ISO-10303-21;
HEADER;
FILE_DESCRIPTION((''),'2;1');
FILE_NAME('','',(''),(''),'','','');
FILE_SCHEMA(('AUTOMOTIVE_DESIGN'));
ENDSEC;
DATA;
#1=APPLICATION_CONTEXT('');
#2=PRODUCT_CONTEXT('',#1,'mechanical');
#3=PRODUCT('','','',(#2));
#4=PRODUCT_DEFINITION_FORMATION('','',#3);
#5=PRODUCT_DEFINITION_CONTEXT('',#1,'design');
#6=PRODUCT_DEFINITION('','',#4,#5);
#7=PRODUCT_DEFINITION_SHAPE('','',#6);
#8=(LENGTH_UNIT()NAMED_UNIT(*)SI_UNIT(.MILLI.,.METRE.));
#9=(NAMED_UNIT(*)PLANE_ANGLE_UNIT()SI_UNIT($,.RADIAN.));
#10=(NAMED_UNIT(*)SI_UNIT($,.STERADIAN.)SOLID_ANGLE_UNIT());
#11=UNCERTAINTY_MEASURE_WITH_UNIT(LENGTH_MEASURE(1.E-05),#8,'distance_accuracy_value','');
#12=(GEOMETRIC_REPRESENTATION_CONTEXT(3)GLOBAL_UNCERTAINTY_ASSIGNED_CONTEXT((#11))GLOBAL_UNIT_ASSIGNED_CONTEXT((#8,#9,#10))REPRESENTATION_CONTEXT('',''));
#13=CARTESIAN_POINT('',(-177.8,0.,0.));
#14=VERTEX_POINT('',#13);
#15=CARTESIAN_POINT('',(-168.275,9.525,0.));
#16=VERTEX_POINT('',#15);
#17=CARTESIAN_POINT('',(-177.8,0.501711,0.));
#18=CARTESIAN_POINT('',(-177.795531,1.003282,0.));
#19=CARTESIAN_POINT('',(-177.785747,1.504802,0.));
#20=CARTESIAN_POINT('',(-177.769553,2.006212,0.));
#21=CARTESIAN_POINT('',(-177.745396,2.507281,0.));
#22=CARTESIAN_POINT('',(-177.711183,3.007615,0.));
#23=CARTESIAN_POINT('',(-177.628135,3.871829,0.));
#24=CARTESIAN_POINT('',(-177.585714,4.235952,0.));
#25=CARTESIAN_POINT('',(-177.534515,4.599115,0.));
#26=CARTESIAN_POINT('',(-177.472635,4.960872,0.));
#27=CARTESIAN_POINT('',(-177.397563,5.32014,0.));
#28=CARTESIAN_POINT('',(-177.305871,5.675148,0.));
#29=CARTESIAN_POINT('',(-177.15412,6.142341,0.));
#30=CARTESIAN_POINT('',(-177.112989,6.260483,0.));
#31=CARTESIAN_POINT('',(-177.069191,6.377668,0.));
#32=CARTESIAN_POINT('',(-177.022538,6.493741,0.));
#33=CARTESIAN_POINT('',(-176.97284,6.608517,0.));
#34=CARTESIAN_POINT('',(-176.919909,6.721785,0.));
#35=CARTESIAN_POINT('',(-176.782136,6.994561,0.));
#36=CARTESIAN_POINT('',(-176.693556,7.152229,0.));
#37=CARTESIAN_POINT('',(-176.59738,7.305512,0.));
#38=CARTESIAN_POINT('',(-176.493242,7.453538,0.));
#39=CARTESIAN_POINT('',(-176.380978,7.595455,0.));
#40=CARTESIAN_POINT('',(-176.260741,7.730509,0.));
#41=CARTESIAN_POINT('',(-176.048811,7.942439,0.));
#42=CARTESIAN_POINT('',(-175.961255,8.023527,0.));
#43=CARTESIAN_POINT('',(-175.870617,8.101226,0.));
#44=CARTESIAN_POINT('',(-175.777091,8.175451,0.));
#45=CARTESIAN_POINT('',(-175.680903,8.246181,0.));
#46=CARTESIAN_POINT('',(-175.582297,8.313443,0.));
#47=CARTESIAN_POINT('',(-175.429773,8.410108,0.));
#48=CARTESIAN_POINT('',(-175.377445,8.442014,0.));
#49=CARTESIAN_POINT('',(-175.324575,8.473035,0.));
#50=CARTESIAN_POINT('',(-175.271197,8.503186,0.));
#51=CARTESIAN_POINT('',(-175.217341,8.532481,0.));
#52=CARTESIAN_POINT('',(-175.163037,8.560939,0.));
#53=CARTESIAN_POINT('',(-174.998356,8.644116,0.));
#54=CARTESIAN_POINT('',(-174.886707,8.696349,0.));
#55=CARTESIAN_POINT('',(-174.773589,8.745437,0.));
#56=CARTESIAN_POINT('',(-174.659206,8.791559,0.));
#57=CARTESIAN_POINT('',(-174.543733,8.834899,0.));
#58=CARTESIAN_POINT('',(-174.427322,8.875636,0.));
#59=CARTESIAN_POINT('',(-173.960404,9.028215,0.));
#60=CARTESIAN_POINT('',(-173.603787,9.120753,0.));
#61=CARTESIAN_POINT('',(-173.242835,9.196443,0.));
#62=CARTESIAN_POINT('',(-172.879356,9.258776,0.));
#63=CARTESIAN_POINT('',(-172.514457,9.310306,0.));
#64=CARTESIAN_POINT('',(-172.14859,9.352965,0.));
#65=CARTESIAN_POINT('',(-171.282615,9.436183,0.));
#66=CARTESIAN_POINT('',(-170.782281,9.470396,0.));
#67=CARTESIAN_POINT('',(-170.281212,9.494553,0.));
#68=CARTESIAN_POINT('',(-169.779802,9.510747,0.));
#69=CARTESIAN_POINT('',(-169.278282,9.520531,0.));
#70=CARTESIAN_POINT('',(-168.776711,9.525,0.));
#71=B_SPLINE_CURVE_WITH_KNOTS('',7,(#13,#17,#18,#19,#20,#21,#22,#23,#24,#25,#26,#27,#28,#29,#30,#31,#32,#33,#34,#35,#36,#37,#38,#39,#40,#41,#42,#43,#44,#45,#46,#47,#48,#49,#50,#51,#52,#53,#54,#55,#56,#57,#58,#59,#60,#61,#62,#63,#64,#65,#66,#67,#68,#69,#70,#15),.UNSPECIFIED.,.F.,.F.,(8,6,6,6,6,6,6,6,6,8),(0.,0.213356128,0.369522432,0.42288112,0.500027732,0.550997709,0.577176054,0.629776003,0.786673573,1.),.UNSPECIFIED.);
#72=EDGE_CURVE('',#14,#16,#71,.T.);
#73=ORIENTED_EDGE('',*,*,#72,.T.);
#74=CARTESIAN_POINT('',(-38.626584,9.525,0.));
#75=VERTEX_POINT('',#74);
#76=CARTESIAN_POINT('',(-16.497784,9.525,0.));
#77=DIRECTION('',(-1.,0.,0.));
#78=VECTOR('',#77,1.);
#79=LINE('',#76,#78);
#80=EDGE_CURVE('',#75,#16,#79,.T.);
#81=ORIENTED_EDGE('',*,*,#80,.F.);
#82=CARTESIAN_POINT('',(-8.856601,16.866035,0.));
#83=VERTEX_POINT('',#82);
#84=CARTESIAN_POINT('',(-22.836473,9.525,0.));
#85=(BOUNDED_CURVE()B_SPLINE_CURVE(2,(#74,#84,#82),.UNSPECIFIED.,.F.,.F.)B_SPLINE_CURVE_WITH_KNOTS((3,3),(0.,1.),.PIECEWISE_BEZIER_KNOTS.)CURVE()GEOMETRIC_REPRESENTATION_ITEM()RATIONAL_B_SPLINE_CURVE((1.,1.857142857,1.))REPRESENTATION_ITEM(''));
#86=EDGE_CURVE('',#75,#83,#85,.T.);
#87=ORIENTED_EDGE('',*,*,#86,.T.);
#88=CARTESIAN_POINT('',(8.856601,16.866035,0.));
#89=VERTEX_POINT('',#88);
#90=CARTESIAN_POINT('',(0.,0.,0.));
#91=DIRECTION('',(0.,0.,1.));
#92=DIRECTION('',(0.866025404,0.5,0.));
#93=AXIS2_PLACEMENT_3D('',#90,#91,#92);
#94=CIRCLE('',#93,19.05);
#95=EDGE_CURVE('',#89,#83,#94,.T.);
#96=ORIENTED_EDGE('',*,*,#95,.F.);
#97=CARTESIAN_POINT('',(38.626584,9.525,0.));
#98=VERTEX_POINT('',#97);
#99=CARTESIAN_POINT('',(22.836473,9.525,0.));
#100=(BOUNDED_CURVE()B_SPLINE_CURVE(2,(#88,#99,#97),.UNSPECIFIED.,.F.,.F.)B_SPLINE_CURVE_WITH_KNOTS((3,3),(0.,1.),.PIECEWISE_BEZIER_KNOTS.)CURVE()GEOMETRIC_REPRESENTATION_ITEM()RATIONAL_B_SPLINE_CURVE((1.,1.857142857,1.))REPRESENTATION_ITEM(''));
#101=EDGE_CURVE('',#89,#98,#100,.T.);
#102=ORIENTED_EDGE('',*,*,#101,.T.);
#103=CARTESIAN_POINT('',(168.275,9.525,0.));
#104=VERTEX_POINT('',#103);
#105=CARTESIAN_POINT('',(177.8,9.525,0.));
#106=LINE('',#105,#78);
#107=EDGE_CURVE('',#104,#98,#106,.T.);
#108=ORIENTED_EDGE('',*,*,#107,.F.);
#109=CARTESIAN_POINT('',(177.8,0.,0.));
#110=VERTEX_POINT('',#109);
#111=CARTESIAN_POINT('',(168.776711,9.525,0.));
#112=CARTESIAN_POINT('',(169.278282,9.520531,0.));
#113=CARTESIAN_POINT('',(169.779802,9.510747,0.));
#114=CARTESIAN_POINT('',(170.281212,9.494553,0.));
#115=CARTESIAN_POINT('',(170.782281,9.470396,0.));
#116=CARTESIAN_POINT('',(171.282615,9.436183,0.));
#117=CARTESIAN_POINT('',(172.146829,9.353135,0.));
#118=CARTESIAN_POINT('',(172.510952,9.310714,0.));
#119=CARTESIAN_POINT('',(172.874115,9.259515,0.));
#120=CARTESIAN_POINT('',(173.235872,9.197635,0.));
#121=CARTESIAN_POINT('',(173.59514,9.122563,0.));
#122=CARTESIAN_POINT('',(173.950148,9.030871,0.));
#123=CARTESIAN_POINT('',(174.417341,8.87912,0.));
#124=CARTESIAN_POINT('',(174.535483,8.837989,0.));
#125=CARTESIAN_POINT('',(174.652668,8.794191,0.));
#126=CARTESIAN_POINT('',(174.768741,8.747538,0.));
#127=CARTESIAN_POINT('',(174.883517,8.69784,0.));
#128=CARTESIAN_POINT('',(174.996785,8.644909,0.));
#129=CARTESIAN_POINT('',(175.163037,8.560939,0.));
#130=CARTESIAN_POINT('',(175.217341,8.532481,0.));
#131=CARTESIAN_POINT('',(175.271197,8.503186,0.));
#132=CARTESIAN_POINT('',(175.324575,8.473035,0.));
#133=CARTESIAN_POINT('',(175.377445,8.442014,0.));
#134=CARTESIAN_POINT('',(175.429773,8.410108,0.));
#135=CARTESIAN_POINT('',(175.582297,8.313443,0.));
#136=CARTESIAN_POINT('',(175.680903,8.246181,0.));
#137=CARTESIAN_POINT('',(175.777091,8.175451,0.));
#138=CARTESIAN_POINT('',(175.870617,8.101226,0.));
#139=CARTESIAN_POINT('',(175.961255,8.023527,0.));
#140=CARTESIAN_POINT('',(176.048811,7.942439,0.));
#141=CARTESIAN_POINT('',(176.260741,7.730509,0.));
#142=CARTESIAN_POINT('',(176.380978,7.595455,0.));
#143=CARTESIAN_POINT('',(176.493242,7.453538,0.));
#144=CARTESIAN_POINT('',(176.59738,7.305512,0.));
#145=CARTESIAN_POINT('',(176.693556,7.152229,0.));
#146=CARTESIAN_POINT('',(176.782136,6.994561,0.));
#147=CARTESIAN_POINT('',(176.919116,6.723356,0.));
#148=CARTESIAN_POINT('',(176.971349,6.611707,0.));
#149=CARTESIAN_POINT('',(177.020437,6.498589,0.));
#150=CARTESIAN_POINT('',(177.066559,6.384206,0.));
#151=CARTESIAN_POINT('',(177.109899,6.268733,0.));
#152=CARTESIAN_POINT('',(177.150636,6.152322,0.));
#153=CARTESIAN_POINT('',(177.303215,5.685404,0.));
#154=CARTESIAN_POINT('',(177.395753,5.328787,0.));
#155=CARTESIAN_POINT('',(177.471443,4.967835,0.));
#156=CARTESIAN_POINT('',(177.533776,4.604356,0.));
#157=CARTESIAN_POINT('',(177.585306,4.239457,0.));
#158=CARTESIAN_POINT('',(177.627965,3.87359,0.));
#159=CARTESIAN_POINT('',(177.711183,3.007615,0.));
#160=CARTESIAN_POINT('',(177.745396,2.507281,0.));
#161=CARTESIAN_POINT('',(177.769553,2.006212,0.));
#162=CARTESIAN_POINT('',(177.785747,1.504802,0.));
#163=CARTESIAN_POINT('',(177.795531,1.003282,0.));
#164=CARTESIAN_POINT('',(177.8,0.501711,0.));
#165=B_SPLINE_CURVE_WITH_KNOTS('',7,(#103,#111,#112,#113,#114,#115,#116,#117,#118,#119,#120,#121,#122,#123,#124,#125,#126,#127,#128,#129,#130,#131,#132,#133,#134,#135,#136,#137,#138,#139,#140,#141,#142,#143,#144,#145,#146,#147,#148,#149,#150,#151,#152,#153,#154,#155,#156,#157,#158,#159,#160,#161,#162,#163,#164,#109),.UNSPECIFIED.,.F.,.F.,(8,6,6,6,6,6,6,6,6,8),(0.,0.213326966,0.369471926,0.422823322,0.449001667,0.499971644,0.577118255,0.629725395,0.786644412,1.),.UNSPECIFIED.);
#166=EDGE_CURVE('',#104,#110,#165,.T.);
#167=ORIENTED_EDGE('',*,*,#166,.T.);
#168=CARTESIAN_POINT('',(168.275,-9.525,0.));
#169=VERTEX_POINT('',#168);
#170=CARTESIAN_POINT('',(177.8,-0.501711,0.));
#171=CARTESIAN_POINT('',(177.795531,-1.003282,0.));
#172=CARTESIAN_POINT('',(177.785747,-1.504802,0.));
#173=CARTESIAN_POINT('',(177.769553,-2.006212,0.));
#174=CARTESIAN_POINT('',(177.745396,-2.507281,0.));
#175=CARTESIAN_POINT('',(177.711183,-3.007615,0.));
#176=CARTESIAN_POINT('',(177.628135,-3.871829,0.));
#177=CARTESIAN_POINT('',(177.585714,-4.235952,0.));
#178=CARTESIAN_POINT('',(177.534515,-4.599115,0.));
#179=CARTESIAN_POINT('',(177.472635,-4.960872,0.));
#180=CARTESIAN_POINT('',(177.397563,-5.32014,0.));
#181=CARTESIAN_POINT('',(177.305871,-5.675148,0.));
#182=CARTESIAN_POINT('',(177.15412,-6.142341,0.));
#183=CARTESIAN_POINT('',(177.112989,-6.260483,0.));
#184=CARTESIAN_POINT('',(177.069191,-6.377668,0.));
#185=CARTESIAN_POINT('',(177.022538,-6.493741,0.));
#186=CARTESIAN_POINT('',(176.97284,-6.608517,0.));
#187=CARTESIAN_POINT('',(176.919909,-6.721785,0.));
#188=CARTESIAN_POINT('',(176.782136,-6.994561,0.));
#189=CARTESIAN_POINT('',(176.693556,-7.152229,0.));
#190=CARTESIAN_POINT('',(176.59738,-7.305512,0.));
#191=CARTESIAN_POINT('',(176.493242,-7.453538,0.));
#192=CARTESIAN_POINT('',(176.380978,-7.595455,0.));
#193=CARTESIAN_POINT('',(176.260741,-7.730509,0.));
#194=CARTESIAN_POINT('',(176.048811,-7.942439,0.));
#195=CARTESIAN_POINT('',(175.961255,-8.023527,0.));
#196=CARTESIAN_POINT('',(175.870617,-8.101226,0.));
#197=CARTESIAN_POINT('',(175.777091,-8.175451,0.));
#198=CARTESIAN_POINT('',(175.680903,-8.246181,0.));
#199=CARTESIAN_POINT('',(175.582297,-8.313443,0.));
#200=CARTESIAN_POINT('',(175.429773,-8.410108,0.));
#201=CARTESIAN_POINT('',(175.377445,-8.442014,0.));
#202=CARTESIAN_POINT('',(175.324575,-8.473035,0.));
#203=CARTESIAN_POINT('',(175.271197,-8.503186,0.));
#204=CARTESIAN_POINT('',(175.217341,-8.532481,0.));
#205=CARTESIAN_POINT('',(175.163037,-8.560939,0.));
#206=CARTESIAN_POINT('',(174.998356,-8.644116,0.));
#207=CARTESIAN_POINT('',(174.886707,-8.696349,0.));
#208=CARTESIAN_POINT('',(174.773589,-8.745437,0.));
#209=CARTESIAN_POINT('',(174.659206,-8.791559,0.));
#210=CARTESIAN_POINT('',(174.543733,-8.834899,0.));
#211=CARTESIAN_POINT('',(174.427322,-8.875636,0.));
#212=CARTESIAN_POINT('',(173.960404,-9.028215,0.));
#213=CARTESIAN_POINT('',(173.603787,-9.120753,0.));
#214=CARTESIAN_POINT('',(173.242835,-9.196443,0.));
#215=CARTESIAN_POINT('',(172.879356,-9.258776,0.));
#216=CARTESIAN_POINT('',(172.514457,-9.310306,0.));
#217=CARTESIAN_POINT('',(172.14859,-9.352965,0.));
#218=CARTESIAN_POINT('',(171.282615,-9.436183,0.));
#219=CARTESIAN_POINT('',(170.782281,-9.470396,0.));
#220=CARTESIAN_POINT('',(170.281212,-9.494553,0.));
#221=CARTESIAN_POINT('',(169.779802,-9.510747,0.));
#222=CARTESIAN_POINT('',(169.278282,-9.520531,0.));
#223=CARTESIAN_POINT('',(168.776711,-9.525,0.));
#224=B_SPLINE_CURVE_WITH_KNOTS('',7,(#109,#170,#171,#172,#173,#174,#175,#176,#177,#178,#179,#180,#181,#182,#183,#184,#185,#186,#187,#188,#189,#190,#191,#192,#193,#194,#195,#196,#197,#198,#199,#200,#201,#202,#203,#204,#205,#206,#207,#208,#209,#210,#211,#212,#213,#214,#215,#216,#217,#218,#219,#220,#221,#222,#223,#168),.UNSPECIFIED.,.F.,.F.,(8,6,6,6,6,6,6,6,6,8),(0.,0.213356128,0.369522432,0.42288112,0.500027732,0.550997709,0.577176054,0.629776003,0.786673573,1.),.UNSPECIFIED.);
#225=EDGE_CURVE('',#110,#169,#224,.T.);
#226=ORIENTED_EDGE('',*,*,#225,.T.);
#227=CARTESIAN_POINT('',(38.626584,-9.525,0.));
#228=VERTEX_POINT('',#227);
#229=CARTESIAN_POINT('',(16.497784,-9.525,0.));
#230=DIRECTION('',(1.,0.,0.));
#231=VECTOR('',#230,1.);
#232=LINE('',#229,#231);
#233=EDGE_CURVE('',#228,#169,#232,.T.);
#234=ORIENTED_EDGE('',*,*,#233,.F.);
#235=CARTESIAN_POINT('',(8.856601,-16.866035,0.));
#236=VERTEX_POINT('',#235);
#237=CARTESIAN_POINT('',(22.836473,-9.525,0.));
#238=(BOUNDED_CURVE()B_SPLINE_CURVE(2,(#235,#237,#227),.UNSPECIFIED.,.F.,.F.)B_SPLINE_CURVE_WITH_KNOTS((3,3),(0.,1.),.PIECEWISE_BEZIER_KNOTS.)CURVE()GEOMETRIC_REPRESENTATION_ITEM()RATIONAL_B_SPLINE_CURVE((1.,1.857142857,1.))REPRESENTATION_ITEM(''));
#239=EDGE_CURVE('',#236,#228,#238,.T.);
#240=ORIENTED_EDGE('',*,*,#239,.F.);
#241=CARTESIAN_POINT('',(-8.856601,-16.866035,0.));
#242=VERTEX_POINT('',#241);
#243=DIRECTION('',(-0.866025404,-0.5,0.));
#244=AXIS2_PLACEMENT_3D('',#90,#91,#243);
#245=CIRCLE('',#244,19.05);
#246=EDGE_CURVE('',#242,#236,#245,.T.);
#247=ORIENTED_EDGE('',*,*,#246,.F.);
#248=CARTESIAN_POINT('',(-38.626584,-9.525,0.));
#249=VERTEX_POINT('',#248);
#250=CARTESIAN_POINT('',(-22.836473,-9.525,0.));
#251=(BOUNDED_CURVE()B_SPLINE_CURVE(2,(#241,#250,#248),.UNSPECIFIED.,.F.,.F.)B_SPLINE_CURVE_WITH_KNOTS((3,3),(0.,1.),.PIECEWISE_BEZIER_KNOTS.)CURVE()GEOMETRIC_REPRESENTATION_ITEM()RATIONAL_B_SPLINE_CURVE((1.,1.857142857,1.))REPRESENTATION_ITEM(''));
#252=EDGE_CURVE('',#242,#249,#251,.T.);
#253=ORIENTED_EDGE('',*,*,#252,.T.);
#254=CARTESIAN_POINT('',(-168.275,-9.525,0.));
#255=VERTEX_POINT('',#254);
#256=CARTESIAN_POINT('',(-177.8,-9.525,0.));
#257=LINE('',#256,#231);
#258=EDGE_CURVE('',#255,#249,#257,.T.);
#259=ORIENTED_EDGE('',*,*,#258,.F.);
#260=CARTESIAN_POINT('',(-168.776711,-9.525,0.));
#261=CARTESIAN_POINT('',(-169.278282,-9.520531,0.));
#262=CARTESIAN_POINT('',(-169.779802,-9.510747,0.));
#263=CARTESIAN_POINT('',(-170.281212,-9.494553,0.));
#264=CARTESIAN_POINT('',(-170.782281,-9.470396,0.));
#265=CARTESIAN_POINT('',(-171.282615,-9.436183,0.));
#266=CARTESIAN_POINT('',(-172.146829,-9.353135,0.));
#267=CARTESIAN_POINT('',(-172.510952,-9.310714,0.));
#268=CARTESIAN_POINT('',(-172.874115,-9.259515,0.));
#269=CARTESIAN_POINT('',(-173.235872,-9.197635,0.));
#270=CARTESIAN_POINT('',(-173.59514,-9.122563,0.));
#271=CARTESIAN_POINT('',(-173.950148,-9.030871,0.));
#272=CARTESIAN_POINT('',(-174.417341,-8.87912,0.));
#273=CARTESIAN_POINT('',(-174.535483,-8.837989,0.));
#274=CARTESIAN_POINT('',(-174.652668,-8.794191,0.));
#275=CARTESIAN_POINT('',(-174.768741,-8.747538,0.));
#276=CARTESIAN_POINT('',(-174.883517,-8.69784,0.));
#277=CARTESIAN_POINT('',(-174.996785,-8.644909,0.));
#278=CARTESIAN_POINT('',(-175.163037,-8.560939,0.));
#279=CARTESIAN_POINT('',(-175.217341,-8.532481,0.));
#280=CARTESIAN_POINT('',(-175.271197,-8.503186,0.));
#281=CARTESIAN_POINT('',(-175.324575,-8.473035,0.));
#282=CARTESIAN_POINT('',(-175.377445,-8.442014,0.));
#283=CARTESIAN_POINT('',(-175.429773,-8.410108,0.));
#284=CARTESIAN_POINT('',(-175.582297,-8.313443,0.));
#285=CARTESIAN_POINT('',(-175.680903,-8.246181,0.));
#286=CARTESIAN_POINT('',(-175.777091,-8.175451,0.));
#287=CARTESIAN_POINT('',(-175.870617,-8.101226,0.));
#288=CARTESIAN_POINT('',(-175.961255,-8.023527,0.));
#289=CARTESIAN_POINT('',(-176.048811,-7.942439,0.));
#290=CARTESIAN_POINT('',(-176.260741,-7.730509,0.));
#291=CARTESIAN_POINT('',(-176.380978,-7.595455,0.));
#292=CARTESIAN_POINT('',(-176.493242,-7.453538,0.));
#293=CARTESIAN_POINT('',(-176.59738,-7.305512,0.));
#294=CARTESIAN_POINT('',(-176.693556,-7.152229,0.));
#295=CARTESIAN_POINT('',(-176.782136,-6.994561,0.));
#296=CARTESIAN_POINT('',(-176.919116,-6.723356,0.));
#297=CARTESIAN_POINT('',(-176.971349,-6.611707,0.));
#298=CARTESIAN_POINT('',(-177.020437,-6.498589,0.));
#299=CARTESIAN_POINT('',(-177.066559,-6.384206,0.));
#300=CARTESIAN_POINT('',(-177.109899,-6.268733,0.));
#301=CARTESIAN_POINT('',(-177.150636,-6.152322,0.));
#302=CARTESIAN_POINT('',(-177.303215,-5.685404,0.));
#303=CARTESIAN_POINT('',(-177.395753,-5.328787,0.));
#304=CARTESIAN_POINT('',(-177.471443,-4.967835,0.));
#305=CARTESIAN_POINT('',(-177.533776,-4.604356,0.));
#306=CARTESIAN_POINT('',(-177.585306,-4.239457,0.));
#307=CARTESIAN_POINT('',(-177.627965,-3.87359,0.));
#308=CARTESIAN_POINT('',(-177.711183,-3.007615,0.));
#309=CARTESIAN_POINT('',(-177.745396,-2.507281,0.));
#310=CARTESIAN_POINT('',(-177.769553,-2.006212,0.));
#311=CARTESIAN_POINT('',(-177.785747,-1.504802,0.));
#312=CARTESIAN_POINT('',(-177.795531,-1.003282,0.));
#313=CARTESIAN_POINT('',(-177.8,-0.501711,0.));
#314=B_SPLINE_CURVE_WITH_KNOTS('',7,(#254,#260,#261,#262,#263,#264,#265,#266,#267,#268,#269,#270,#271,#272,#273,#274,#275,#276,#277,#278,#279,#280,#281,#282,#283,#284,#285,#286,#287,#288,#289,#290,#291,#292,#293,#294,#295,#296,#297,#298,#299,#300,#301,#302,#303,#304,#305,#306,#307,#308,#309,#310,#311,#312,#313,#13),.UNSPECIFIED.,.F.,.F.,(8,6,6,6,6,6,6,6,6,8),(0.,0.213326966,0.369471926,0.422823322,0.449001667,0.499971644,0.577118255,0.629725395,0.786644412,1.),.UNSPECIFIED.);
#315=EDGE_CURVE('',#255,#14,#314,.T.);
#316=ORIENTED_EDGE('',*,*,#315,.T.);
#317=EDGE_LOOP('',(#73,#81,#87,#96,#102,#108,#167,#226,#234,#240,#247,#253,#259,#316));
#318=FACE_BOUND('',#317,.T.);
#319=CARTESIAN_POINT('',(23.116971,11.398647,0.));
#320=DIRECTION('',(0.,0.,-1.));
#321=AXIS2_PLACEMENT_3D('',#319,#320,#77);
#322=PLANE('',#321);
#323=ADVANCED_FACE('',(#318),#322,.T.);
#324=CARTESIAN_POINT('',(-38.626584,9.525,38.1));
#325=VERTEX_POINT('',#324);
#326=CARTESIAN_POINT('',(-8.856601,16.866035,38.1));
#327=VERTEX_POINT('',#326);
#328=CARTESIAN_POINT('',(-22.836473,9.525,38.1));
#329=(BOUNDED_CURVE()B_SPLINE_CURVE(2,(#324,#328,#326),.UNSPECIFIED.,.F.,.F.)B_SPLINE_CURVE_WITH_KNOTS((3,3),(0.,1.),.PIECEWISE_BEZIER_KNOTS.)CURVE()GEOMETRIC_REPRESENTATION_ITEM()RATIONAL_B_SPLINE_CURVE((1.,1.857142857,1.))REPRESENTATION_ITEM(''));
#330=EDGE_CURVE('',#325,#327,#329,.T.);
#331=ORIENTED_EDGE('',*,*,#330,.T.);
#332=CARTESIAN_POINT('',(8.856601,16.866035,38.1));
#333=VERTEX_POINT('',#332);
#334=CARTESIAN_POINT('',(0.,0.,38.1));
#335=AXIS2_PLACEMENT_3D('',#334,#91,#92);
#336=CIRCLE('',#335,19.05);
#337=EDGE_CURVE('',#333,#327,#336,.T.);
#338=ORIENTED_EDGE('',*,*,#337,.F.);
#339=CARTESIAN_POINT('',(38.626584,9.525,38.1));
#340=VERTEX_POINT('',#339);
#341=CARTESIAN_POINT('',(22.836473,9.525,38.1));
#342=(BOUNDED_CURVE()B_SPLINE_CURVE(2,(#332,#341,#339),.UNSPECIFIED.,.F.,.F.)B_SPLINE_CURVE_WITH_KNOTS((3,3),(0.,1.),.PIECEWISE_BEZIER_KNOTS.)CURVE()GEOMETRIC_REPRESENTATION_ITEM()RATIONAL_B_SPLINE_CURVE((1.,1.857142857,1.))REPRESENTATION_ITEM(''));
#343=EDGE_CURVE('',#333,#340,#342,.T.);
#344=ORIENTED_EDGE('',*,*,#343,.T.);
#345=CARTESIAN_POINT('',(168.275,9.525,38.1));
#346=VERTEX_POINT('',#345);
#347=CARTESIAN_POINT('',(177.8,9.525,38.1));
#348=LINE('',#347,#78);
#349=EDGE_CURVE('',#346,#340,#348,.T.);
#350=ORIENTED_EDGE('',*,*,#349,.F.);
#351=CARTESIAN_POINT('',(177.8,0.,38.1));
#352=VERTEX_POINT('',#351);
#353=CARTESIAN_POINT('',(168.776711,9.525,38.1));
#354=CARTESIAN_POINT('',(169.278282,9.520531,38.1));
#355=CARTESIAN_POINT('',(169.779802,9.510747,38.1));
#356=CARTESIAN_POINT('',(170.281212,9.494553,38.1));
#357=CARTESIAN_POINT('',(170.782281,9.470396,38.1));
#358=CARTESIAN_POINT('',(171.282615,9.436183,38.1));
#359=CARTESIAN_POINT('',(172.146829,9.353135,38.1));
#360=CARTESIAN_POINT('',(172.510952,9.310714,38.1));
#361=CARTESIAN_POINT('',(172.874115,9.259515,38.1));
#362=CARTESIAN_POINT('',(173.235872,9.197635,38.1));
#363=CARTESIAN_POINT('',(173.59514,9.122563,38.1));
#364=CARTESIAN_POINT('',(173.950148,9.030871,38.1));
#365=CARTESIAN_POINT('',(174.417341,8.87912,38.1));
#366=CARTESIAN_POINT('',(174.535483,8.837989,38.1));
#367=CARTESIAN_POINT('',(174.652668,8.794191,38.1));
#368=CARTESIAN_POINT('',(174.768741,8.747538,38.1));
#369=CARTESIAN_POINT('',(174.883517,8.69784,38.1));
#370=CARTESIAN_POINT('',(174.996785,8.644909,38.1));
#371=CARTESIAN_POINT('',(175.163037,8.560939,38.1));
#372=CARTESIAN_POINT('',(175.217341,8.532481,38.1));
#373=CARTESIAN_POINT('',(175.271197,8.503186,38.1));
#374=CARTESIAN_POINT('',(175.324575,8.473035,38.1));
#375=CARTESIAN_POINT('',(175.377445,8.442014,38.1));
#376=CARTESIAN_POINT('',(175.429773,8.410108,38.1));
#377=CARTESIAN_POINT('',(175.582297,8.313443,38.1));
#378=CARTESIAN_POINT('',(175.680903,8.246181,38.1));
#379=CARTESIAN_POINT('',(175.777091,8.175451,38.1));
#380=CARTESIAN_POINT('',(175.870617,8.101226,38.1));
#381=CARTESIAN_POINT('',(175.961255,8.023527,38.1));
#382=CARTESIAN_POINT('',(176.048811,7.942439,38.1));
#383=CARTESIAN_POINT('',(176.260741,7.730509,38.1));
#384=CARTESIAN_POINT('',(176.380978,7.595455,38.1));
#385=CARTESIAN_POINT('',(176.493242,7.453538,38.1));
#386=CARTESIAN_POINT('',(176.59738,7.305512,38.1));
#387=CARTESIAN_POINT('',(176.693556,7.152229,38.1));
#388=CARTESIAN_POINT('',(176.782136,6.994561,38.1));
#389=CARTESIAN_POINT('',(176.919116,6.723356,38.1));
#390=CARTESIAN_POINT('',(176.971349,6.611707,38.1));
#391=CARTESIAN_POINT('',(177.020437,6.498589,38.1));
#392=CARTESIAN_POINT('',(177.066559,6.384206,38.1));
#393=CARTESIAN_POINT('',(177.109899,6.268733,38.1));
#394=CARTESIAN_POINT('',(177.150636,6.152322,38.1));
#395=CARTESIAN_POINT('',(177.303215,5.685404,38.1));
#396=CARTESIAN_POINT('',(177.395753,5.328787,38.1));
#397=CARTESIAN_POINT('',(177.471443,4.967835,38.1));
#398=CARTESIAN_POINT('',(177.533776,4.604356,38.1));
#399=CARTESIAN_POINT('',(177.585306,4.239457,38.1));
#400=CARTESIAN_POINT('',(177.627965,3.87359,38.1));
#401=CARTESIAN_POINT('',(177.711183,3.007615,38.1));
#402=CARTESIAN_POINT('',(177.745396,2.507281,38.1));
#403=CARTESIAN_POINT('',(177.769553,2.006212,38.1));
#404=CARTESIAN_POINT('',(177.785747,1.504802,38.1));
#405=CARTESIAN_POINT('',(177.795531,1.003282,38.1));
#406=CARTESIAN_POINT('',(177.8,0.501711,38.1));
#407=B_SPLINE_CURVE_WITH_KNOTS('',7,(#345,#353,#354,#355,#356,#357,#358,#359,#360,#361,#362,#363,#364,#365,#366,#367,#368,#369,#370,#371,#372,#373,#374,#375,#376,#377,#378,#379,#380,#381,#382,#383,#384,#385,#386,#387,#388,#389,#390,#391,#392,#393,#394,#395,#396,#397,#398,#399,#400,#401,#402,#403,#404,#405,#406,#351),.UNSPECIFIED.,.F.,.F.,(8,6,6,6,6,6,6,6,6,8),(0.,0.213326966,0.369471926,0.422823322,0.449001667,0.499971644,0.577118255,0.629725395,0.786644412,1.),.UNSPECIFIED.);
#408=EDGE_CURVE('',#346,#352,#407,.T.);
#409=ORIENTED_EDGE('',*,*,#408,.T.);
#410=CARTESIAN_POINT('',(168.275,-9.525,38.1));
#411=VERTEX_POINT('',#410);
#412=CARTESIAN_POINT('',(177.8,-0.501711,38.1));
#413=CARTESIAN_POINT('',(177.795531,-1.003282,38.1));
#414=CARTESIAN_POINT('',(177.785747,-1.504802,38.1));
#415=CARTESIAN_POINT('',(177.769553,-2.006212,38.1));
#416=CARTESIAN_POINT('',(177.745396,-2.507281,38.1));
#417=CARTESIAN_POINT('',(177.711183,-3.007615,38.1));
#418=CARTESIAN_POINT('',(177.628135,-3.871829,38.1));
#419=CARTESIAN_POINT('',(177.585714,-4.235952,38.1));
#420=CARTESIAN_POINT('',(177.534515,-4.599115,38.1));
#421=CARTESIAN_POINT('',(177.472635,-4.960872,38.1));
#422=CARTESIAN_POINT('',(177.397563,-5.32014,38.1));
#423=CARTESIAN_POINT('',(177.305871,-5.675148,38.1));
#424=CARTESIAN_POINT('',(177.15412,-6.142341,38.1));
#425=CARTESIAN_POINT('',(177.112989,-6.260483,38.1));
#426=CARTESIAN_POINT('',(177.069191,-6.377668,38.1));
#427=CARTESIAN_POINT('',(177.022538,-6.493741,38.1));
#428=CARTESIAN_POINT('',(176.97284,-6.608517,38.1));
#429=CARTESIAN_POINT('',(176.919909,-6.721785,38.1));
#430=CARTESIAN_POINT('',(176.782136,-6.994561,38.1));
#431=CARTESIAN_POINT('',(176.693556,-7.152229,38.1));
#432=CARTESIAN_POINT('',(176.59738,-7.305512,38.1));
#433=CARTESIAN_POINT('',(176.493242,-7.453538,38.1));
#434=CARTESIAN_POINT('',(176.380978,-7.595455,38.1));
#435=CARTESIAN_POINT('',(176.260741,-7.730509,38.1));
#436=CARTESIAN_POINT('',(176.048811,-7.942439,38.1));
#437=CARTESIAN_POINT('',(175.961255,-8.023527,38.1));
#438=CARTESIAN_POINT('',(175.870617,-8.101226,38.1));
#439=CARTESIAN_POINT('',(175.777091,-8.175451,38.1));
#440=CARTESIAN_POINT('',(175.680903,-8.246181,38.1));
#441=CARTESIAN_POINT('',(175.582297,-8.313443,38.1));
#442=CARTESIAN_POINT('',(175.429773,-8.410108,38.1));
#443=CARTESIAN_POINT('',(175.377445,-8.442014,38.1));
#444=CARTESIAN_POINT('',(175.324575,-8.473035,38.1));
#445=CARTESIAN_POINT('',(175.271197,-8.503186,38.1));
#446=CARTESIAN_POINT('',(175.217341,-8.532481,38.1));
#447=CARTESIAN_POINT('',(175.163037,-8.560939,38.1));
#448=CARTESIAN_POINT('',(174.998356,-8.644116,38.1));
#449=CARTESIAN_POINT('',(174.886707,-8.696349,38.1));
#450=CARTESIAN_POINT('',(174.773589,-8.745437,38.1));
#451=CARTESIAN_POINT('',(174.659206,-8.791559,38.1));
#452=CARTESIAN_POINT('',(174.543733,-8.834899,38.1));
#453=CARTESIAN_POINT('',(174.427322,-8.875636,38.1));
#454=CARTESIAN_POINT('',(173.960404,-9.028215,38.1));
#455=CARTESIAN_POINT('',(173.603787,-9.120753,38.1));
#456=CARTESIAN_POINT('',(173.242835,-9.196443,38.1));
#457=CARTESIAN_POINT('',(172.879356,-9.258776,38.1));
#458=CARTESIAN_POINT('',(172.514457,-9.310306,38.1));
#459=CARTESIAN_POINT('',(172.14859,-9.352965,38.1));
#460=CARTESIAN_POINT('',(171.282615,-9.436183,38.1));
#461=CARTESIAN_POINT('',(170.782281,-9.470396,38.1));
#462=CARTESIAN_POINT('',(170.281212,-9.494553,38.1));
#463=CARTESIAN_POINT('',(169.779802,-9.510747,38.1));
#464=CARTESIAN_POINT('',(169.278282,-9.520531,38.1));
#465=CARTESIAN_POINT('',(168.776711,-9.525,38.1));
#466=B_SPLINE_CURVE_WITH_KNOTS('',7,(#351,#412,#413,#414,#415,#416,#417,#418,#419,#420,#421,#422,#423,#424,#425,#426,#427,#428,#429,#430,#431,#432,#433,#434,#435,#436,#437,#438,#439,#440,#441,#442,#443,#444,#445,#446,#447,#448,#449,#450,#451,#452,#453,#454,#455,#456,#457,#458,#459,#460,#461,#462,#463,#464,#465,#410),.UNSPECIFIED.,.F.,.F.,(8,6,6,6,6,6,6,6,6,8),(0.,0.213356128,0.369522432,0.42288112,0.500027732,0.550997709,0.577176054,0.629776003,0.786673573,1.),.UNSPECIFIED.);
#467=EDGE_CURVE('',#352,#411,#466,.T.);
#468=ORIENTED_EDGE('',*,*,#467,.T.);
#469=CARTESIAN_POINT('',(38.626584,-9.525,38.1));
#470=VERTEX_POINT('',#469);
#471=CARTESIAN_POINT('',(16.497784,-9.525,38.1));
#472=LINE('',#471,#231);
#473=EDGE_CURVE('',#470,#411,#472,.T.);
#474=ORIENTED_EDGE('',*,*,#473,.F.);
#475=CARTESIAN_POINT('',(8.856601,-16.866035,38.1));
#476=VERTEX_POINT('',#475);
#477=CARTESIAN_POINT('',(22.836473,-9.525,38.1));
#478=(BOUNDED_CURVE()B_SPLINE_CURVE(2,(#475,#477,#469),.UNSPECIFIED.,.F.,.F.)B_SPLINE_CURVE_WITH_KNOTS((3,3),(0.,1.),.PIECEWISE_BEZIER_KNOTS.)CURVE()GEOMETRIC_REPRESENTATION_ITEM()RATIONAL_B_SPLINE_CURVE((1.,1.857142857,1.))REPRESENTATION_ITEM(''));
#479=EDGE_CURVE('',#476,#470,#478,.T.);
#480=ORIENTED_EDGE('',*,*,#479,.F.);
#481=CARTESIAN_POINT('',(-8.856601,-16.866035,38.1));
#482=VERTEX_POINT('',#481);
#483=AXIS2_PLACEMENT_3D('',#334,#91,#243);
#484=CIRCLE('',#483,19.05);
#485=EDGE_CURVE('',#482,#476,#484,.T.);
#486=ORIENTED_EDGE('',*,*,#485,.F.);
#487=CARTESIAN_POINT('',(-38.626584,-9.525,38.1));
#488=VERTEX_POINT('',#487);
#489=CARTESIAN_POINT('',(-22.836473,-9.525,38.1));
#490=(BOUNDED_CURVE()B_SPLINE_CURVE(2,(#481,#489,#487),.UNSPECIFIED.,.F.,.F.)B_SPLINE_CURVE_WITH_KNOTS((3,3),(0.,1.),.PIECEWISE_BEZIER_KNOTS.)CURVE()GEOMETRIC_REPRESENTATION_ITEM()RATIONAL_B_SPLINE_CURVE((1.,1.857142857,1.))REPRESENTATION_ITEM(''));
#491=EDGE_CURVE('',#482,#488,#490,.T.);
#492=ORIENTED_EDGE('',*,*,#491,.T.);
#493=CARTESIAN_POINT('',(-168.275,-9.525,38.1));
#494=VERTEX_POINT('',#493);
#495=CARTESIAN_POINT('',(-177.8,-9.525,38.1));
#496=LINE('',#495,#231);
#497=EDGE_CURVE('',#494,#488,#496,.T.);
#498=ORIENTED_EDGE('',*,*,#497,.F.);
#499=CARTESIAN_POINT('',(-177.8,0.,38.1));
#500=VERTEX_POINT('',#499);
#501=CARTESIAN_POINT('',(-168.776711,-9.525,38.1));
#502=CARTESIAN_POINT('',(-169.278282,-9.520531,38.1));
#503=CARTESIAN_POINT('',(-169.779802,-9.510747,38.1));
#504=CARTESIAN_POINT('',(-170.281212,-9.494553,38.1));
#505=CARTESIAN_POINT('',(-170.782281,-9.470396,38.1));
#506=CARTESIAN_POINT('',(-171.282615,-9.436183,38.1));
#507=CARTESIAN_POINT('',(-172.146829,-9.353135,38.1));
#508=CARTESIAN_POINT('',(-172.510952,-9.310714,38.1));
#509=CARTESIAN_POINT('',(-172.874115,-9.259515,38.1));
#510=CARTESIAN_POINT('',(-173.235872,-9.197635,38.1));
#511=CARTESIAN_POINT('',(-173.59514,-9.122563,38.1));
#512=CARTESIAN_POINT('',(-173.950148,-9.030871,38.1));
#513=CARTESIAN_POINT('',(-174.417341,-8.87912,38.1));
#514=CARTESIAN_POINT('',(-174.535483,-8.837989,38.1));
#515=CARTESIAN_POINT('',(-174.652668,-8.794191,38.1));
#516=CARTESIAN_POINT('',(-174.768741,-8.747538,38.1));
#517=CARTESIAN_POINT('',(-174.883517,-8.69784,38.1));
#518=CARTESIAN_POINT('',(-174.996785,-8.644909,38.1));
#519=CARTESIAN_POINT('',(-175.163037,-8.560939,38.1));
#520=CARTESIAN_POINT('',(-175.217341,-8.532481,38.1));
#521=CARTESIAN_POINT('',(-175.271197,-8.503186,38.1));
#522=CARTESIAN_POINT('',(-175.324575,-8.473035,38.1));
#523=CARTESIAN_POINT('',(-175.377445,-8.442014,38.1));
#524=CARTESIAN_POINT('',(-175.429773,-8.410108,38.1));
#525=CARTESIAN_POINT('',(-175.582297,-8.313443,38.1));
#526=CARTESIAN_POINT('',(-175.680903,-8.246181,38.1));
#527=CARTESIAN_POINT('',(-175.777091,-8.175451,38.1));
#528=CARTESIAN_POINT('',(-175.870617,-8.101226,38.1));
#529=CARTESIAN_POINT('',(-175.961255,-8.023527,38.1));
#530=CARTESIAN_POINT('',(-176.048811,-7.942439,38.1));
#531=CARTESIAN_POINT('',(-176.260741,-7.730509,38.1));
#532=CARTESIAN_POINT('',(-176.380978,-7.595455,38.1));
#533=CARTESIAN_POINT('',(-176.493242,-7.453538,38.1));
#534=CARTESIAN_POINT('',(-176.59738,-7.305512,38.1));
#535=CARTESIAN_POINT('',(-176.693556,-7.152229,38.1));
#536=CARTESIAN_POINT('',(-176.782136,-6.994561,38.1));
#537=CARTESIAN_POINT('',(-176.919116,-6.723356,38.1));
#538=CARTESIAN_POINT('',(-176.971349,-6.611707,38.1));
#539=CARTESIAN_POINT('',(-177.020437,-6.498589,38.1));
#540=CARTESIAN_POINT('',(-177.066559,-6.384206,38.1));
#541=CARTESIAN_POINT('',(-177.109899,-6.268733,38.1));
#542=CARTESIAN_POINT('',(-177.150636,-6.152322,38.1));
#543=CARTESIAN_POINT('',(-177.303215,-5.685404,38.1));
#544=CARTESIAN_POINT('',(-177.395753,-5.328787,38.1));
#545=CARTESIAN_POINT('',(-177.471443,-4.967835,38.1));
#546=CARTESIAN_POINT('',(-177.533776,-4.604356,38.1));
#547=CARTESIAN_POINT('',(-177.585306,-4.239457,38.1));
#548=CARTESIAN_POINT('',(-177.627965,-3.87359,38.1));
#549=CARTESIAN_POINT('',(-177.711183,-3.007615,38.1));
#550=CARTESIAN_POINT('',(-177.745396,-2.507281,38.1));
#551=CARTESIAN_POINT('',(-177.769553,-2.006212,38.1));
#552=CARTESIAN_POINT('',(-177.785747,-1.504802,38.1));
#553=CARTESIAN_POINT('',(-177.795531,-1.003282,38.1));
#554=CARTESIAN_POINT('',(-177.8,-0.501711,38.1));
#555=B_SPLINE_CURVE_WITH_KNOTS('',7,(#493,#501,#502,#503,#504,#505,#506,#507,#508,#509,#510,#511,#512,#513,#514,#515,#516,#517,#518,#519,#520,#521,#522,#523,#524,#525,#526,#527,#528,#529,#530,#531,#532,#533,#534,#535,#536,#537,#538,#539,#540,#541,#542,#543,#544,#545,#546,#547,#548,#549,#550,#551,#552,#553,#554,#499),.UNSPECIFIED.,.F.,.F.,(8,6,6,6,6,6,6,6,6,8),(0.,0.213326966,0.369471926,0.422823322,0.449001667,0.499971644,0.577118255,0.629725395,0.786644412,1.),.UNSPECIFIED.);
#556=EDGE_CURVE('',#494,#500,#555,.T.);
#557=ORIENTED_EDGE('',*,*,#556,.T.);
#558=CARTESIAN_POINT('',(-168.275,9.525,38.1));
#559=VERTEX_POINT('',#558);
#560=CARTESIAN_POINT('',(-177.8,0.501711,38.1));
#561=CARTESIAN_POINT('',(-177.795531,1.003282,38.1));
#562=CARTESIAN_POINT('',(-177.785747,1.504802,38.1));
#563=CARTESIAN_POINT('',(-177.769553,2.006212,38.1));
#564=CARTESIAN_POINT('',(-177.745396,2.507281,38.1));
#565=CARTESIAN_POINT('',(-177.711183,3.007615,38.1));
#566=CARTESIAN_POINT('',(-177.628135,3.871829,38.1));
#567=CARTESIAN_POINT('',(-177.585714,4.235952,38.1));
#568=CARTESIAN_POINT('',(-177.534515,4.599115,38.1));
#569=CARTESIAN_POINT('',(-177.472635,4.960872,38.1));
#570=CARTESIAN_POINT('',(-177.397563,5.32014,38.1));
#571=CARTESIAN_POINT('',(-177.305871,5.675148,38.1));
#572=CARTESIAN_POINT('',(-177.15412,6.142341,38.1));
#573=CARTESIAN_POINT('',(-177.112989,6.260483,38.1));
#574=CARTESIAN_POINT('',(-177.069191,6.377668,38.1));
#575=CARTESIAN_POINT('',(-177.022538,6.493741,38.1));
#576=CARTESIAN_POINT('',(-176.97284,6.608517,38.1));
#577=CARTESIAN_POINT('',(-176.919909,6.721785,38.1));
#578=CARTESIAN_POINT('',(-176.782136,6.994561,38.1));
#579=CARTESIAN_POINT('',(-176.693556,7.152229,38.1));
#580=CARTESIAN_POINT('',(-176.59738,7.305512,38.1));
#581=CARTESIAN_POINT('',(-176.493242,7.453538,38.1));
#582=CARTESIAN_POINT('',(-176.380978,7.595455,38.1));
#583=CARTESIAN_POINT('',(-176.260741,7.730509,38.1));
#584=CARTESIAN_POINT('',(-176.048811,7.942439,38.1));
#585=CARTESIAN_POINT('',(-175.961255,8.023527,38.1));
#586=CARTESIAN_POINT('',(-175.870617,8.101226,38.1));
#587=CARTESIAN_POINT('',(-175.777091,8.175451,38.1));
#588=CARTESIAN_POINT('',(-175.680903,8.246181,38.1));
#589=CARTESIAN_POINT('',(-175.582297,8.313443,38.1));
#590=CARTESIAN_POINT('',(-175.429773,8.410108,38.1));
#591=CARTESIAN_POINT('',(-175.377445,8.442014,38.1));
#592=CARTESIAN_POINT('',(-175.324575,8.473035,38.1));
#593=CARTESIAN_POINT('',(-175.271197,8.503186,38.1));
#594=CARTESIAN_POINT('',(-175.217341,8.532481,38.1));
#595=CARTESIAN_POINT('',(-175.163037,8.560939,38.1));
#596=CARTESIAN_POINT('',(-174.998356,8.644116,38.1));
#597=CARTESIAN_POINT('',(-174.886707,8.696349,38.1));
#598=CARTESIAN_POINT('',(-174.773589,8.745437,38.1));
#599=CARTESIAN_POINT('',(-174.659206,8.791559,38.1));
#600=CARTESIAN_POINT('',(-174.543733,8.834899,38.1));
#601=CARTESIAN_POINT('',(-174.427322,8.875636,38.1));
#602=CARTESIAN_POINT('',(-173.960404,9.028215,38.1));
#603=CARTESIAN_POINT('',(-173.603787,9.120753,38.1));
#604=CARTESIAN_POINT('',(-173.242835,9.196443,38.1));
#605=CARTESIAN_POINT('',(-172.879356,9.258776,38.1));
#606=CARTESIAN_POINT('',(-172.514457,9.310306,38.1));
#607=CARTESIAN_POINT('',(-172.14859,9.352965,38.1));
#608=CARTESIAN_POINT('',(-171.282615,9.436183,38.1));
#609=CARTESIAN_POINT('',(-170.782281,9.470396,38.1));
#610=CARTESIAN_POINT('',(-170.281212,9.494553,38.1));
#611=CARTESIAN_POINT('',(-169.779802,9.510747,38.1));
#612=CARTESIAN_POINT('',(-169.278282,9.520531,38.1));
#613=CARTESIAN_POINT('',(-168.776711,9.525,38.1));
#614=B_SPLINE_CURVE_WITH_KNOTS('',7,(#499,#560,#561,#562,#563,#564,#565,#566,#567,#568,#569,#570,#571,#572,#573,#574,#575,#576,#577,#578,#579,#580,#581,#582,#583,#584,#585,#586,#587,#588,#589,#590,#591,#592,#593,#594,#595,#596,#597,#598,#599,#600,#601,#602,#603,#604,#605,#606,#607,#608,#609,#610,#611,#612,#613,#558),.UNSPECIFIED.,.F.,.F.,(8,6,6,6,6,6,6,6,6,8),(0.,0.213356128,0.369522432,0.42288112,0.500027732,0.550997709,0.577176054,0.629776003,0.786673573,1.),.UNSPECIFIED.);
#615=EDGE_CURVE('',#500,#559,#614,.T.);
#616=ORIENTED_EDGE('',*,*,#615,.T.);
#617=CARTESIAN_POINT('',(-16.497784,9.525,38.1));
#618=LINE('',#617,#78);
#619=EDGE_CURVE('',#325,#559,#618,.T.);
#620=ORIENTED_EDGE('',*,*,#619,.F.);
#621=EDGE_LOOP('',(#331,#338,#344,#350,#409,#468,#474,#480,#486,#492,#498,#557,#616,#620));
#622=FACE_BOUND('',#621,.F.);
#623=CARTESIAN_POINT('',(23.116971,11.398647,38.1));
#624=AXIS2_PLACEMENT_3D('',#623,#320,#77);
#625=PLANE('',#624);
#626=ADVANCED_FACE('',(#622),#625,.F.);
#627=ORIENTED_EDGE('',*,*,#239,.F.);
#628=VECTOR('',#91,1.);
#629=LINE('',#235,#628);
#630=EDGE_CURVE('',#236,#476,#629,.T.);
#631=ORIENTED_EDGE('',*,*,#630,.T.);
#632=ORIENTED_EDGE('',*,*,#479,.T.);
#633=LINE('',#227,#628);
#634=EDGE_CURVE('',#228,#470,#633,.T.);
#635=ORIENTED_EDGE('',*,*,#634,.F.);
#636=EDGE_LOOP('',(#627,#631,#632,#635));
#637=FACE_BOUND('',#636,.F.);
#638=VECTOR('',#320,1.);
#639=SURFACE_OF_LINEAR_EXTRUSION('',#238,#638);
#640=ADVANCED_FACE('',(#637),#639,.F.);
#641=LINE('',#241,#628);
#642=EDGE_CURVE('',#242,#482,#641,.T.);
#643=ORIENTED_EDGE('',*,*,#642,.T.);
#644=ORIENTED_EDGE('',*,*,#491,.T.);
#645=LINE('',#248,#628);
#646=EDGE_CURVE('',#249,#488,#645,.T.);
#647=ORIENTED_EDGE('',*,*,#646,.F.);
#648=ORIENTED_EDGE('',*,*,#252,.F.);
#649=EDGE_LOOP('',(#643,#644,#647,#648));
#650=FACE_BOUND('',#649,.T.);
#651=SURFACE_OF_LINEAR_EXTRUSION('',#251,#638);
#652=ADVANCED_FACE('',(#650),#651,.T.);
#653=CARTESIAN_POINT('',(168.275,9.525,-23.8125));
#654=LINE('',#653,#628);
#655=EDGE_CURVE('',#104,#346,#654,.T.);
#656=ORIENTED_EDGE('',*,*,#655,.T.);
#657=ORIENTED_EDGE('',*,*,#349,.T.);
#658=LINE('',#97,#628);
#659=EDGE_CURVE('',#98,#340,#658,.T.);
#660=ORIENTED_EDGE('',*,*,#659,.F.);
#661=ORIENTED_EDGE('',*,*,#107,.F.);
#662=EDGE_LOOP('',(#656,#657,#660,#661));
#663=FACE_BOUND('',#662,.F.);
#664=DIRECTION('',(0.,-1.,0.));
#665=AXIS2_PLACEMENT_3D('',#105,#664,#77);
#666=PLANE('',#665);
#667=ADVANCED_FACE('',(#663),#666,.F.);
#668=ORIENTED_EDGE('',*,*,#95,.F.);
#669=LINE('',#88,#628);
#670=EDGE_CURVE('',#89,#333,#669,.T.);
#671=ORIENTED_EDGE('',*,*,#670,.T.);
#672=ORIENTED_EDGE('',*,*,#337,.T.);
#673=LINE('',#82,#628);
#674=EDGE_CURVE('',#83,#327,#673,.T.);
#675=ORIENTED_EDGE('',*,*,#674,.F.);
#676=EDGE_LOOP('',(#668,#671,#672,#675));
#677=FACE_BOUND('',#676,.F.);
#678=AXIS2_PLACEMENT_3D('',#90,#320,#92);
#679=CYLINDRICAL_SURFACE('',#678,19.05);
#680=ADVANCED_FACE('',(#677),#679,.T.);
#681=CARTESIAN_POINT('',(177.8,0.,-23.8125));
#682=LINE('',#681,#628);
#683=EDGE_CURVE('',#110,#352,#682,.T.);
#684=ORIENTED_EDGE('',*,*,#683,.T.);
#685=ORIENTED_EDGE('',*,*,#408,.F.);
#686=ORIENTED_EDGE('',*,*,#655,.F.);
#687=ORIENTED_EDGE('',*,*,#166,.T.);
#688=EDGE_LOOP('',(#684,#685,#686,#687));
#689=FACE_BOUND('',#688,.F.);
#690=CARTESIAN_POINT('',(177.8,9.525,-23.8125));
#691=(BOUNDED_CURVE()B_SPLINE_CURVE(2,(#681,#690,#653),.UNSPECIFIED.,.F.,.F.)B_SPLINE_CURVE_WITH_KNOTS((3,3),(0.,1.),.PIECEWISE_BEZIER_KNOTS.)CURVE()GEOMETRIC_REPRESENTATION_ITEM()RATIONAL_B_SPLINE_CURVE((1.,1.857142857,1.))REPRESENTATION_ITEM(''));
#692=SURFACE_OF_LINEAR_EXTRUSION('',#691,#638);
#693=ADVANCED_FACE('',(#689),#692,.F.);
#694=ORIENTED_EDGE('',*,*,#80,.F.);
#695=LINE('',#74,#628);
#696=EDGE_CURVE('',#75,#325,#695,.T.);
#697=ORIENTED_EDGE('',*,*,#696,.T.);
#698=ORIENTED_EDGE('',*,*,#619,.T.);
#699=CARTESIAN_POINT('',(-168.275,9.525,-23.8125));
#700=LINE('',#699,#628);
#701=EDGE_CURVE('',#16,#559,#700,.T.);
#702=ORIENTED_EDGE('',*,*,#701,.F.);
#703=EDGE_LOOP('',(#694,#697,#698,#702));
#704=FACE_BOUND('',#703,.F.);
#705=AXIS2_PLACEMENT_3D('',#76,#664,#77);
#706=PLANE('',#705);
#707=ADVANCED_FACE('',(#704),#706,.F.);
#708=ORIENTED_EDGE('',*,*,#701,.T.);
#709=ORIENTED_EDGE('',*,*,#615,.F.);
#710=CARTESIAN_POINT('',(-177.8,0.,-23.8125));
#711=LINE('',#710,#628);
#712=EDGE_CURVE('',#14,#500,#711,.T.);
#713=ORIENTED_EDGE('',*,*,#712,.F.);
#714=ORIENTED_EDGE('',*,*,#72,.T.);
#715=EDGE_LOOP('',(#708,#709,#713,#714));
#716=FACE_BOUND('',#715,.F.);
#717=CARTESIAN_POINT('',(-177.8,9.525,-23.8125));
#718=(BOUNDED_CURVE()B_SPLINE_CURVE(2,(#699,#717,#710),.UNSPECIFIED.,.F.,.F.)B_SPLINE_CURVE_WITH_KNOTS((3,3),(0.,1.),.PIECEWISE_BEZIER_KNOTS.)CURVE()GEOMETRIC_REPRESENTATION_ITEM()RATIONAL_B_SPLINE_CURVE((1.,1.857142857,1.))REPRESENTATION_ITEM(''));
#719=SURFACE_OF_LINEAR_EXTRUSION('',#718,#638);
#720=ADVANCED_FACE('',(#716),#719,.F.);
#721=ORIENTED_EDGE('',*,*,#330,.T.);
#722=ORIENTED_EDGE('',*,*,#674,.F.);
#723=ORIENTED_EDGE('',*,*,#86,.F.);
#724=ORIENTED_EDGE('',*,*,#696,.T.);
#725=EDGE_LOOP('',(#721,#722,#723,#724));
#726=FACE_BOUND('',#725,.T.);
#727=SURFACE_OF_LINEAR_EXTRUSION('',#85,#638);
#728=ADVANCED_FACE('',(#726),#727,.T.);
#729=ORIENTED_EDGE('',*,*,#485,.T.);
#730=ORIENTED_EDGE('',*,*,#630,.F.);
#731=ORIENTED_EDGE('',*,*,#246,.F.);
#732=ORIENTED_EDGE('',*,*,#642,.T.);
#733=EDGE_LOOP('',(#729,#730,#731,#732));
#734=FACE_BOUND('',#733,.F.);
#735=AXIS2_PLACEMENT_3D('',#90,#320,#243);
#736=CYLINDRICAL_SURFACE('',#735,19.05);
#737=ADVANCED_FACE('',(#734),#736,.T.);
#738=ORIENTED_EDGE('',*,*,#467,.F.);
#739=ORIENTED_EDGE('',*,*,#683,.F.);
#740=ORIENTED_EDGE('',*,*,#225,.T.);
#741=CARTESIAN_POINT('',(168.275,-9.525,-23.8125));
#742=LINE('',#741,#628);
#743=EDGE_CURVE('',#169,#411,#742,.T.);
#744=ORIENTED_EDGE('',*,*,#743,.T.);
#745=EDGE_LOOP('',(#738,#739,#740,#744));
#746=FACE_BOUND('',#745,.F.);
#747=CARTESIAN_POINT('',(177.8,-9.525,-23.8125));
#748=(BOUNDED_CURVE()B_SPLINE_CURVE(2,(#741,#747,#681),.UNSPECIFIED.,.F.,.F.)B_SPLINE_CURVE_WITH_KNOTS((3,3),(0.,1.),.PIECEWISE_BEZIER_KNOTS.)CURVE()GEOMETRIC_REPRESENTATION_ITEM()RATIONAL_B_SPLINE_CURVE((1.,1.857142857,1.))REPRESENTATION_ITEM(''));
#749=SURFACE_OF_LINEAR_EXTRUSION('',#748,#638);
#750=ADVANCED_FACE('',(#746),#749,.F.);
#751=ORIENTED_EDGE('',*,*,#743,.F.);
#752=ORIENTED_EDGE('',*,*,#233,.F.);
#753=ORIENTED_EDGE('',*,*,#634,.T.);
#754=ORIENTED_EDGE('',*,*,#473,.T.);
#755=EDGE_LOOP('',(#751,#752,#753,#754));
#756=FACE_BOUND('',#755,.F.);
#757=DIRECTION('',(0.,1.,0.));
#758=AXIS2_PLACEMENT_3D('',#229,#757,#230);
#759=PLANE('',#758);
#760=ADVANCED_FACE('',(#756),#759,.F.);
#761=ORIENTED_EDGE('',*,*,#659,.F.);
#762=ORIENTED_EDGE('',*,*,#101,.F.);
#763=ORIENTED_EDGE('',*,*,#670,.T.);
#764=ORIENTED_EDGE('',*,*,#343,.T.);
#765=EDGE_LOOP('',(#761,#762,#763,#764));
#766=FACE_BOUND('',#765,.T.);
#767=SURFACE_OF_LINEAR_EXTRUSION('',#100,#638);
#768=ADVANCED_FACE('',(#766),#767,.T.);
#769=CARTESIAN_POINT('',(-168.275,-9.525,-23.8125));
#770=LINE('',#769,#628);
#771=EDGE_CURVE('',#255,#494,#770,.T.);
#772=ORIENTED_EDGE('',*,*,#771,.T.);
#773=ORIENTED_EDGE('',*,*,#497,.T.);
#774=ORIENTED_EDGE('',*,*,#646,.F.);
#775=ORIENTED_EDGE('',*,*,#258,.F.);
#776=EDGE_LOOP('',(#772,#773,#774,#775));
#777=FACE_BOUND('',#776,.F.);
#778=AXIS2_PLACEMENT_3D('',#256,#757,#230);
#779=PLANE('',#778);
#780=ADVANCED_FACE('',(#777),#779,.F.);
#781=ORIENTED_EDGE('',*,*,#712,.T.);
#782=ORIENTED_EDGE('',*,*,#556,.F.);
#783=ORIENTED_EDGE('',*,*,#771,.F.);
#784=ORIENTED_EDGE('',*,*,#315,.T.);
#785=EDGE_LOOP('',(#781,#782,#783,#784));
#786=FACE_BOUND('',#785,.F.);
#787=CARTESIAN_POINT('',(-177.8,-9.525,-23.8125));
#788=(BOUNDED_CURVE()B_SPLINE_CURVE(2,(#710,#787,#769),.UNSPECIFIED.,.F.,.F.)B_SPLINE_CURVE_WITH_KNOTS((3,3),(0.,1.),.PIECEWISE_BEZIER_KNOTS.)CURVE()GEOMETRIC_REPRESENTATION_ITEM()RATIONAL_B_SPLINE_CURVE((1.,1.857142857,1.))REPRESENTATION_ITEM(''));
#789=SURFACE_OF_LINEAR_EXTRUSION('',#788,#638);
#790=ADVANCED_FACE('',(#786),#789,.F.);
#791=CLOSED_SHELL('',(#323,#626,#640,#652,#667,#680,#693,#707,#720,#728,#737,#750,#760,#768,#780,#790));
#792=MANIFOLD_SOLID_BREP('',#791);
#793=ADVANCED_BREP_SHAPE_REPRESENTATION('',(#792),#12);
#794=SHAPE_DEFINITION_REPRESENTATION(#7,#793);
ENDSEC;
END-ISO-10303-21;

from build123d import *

# Parameters (mm, degrees)
F0_R        = 7.9375
F1_DEPTH    = 38.1
F2_T1_DEPTH = 85.725
F3_T1_DEPTH = 38.1


# Not quite as in the source:
# - a fillet or chamfer that OpenCascade refuses, or shapes differently, is made with other operations: its cross-section is extruded or revolved along the edge and cut away or added
# - a length typed as a fraction of an inch, garbled in the dataset ("3 / 203.2 mm" for 3/8 in), is restored


with BuildPart() as f1:
    # F0 (on Top) → F1 (new body)
    with BuildSketch(Plane.XY):
        with BuildLine():
            Line((16.4977839421, -9.525), (177.8, -9.525))
            Line((177.8, -9.525), (177.8, 9.525))
            Line((177.8, 9.525), (16.4977839421, 9.525))
            ThreePointArc((16.4977839421, 9.525), (0, 19.05), (-16.4977839421, 9.525))
            Line((-16.4977839421, 9.525), (-177.8, 9.525))
            Line((-177.8, 9.525), (-177.8, -9.525))
            Line((-177.8, -9.525), (-16.4977839421, -9.525))
            ThreePointArc((-16.4977839421, -9.525), (0, -19.05), (16.4977839421, -9.525))
        make_face()
        Circle(F0_R, mode=Mode.SUBTRACT)
        Circle(F0_R)
    extrude(amount=F1_DEPTH)

    # F2: fillet of radius 9.525 on 4 edges, made by hand

    # F2_s2 → F2_t1 (cut)
    with BuildSketch(Plane.XY.offset(-23.8125)):
        with BuildLine():
            add(Edge.make_bspline(
                [(-177.8, 0), (-177.8, -9.525), (-168.275, -9.525)],
                knots=[0, 0, 0, 1, 1, 1], degree=2, weights=[1, 1.8571428571, 1]))
            Line((-168.275, -9.525), (-177.8, -9.525))
            Line((-177.8, -9.525), (-177.8, 0))
        make_face()
        with BuildLine():
            add(Edge.make_bspline(
                [(-168.275, 9.525), (-177.8, 9.525), (-177.8, 0)],
                knots=[0, 0, 0, 1, 1, 1], degree=2, weights=[1, 1.8571428571, 1]))
            Line((-177.8, 0), (-177.8, 9.525))
            Line((-177.8, 9.525), (-168.275, 9.525))
        make_face()
        with BuildLine():
            add(Edge.make_bspline(
                [(177.8, 0), (177.8, 9.525), (168.275, 9.525)],
                knots=[0, 0, 0, 1, 1, 1], degree=2, weights=[1, 1.8571428571, 1]))
            Line((168.275, 9.525), (177.8, 9.525))
            Line((177.8, 9.525), (177.8, 0))
        make_face()
        with BuildLine():
            add(Edge.make_bspline(
                [(168.275, -9.525), (177.8, -9.525), (177.8, 0)],
                knots=[0, 0, 0, 1, 1, 1], degree=2, weights=[1, 1.8571428571, 1]))
            Line((177.8, 0), (177.8, -9.525))
            Line((177.8, -9.525), (168.275, -9.525))
        make_face()
    extrude(amount=F2_T1_DEPTH, mode=Mode.SUBTRACT)

    # F3: fillet of radius 64.0333905996 on 4 edges, made by hand

    # F3_s2 → F3_t1 (join)
    with BuildSketch(Plane.XY):
        with BuildLine():
            add(Edge.make_bspline(
                [(8.8566007427, 16.8660346046), (22.8364726227, 9.525), (38.6265836688, 9.525)],
                knots=[0, 0, 0, 1, 1, 1], degree=2, weights=[1, 1.8571428571, 1]))
            Line((38.6265836688, 9.525), (16.4977839421, 9.525))
            ThreePointArc((16.4977839421, 9.525), (13.1978749408, 13.737488746), (8.8566007427, 16.8660346046))
        make_face()
        with BuildLine():
            add(Edge.make_bspline(
                [(-38.6265836688, 9.525), (-22.8364726227, 9.525), (-8.8566007427, 16.8660346046)],
                knots=[0, 0, 0, 1, 1, 1], degree=2, weights=[1, 1.8571428571, 1]))
            ThreePointArc((-8.8566007427, 16.8660346046), (-13.1978749408, 13.737488746), (-16.4977839421, 9.525))
            Line((-16.4977839421, 9.525), (-38.6265836688, 9.525))
        make_face()
        with BuildLine():
            add(Edge.make_bspline(
                [(-8.8566007427, -16.8660346046), (-22.8364726227, -9.525), (-38.6265836688, -9.525)],
                knots=[0, 0, 0, 1, 1, 1], degree=2, weights=[1, 1.8571428571, 1]))
            Line((-38.6265836688, -9.525), (-16.4977839421, -9.525))
            ThreePointArc((-16.4977839421, -9.525), (-13.1978749408, -13.737488746), (-8.8566007427, -16.8660346046))
        make_face()
        with BuildLine():
            add(Edge.make_bspline(
                [(8.8566007427, -16.8660346046), (22.8364726227, -9.525), (38.6265836688, -9.525)],
                knots=[0, 0, 0, 1, 1, 1], degree=2, weights=[1, 1.8571428571, 1]))
            Line((38.6265836688, -9.525), (16.4977839421, -9.525))
            ThreePointArc((16.4977839421, -9.525), (13.1978749408, -13.737488746), (8.8566007427, -16.8660346046))
        make_face()
    extrude(amount=F3_T1_DEPTH)


solid = f1.part
